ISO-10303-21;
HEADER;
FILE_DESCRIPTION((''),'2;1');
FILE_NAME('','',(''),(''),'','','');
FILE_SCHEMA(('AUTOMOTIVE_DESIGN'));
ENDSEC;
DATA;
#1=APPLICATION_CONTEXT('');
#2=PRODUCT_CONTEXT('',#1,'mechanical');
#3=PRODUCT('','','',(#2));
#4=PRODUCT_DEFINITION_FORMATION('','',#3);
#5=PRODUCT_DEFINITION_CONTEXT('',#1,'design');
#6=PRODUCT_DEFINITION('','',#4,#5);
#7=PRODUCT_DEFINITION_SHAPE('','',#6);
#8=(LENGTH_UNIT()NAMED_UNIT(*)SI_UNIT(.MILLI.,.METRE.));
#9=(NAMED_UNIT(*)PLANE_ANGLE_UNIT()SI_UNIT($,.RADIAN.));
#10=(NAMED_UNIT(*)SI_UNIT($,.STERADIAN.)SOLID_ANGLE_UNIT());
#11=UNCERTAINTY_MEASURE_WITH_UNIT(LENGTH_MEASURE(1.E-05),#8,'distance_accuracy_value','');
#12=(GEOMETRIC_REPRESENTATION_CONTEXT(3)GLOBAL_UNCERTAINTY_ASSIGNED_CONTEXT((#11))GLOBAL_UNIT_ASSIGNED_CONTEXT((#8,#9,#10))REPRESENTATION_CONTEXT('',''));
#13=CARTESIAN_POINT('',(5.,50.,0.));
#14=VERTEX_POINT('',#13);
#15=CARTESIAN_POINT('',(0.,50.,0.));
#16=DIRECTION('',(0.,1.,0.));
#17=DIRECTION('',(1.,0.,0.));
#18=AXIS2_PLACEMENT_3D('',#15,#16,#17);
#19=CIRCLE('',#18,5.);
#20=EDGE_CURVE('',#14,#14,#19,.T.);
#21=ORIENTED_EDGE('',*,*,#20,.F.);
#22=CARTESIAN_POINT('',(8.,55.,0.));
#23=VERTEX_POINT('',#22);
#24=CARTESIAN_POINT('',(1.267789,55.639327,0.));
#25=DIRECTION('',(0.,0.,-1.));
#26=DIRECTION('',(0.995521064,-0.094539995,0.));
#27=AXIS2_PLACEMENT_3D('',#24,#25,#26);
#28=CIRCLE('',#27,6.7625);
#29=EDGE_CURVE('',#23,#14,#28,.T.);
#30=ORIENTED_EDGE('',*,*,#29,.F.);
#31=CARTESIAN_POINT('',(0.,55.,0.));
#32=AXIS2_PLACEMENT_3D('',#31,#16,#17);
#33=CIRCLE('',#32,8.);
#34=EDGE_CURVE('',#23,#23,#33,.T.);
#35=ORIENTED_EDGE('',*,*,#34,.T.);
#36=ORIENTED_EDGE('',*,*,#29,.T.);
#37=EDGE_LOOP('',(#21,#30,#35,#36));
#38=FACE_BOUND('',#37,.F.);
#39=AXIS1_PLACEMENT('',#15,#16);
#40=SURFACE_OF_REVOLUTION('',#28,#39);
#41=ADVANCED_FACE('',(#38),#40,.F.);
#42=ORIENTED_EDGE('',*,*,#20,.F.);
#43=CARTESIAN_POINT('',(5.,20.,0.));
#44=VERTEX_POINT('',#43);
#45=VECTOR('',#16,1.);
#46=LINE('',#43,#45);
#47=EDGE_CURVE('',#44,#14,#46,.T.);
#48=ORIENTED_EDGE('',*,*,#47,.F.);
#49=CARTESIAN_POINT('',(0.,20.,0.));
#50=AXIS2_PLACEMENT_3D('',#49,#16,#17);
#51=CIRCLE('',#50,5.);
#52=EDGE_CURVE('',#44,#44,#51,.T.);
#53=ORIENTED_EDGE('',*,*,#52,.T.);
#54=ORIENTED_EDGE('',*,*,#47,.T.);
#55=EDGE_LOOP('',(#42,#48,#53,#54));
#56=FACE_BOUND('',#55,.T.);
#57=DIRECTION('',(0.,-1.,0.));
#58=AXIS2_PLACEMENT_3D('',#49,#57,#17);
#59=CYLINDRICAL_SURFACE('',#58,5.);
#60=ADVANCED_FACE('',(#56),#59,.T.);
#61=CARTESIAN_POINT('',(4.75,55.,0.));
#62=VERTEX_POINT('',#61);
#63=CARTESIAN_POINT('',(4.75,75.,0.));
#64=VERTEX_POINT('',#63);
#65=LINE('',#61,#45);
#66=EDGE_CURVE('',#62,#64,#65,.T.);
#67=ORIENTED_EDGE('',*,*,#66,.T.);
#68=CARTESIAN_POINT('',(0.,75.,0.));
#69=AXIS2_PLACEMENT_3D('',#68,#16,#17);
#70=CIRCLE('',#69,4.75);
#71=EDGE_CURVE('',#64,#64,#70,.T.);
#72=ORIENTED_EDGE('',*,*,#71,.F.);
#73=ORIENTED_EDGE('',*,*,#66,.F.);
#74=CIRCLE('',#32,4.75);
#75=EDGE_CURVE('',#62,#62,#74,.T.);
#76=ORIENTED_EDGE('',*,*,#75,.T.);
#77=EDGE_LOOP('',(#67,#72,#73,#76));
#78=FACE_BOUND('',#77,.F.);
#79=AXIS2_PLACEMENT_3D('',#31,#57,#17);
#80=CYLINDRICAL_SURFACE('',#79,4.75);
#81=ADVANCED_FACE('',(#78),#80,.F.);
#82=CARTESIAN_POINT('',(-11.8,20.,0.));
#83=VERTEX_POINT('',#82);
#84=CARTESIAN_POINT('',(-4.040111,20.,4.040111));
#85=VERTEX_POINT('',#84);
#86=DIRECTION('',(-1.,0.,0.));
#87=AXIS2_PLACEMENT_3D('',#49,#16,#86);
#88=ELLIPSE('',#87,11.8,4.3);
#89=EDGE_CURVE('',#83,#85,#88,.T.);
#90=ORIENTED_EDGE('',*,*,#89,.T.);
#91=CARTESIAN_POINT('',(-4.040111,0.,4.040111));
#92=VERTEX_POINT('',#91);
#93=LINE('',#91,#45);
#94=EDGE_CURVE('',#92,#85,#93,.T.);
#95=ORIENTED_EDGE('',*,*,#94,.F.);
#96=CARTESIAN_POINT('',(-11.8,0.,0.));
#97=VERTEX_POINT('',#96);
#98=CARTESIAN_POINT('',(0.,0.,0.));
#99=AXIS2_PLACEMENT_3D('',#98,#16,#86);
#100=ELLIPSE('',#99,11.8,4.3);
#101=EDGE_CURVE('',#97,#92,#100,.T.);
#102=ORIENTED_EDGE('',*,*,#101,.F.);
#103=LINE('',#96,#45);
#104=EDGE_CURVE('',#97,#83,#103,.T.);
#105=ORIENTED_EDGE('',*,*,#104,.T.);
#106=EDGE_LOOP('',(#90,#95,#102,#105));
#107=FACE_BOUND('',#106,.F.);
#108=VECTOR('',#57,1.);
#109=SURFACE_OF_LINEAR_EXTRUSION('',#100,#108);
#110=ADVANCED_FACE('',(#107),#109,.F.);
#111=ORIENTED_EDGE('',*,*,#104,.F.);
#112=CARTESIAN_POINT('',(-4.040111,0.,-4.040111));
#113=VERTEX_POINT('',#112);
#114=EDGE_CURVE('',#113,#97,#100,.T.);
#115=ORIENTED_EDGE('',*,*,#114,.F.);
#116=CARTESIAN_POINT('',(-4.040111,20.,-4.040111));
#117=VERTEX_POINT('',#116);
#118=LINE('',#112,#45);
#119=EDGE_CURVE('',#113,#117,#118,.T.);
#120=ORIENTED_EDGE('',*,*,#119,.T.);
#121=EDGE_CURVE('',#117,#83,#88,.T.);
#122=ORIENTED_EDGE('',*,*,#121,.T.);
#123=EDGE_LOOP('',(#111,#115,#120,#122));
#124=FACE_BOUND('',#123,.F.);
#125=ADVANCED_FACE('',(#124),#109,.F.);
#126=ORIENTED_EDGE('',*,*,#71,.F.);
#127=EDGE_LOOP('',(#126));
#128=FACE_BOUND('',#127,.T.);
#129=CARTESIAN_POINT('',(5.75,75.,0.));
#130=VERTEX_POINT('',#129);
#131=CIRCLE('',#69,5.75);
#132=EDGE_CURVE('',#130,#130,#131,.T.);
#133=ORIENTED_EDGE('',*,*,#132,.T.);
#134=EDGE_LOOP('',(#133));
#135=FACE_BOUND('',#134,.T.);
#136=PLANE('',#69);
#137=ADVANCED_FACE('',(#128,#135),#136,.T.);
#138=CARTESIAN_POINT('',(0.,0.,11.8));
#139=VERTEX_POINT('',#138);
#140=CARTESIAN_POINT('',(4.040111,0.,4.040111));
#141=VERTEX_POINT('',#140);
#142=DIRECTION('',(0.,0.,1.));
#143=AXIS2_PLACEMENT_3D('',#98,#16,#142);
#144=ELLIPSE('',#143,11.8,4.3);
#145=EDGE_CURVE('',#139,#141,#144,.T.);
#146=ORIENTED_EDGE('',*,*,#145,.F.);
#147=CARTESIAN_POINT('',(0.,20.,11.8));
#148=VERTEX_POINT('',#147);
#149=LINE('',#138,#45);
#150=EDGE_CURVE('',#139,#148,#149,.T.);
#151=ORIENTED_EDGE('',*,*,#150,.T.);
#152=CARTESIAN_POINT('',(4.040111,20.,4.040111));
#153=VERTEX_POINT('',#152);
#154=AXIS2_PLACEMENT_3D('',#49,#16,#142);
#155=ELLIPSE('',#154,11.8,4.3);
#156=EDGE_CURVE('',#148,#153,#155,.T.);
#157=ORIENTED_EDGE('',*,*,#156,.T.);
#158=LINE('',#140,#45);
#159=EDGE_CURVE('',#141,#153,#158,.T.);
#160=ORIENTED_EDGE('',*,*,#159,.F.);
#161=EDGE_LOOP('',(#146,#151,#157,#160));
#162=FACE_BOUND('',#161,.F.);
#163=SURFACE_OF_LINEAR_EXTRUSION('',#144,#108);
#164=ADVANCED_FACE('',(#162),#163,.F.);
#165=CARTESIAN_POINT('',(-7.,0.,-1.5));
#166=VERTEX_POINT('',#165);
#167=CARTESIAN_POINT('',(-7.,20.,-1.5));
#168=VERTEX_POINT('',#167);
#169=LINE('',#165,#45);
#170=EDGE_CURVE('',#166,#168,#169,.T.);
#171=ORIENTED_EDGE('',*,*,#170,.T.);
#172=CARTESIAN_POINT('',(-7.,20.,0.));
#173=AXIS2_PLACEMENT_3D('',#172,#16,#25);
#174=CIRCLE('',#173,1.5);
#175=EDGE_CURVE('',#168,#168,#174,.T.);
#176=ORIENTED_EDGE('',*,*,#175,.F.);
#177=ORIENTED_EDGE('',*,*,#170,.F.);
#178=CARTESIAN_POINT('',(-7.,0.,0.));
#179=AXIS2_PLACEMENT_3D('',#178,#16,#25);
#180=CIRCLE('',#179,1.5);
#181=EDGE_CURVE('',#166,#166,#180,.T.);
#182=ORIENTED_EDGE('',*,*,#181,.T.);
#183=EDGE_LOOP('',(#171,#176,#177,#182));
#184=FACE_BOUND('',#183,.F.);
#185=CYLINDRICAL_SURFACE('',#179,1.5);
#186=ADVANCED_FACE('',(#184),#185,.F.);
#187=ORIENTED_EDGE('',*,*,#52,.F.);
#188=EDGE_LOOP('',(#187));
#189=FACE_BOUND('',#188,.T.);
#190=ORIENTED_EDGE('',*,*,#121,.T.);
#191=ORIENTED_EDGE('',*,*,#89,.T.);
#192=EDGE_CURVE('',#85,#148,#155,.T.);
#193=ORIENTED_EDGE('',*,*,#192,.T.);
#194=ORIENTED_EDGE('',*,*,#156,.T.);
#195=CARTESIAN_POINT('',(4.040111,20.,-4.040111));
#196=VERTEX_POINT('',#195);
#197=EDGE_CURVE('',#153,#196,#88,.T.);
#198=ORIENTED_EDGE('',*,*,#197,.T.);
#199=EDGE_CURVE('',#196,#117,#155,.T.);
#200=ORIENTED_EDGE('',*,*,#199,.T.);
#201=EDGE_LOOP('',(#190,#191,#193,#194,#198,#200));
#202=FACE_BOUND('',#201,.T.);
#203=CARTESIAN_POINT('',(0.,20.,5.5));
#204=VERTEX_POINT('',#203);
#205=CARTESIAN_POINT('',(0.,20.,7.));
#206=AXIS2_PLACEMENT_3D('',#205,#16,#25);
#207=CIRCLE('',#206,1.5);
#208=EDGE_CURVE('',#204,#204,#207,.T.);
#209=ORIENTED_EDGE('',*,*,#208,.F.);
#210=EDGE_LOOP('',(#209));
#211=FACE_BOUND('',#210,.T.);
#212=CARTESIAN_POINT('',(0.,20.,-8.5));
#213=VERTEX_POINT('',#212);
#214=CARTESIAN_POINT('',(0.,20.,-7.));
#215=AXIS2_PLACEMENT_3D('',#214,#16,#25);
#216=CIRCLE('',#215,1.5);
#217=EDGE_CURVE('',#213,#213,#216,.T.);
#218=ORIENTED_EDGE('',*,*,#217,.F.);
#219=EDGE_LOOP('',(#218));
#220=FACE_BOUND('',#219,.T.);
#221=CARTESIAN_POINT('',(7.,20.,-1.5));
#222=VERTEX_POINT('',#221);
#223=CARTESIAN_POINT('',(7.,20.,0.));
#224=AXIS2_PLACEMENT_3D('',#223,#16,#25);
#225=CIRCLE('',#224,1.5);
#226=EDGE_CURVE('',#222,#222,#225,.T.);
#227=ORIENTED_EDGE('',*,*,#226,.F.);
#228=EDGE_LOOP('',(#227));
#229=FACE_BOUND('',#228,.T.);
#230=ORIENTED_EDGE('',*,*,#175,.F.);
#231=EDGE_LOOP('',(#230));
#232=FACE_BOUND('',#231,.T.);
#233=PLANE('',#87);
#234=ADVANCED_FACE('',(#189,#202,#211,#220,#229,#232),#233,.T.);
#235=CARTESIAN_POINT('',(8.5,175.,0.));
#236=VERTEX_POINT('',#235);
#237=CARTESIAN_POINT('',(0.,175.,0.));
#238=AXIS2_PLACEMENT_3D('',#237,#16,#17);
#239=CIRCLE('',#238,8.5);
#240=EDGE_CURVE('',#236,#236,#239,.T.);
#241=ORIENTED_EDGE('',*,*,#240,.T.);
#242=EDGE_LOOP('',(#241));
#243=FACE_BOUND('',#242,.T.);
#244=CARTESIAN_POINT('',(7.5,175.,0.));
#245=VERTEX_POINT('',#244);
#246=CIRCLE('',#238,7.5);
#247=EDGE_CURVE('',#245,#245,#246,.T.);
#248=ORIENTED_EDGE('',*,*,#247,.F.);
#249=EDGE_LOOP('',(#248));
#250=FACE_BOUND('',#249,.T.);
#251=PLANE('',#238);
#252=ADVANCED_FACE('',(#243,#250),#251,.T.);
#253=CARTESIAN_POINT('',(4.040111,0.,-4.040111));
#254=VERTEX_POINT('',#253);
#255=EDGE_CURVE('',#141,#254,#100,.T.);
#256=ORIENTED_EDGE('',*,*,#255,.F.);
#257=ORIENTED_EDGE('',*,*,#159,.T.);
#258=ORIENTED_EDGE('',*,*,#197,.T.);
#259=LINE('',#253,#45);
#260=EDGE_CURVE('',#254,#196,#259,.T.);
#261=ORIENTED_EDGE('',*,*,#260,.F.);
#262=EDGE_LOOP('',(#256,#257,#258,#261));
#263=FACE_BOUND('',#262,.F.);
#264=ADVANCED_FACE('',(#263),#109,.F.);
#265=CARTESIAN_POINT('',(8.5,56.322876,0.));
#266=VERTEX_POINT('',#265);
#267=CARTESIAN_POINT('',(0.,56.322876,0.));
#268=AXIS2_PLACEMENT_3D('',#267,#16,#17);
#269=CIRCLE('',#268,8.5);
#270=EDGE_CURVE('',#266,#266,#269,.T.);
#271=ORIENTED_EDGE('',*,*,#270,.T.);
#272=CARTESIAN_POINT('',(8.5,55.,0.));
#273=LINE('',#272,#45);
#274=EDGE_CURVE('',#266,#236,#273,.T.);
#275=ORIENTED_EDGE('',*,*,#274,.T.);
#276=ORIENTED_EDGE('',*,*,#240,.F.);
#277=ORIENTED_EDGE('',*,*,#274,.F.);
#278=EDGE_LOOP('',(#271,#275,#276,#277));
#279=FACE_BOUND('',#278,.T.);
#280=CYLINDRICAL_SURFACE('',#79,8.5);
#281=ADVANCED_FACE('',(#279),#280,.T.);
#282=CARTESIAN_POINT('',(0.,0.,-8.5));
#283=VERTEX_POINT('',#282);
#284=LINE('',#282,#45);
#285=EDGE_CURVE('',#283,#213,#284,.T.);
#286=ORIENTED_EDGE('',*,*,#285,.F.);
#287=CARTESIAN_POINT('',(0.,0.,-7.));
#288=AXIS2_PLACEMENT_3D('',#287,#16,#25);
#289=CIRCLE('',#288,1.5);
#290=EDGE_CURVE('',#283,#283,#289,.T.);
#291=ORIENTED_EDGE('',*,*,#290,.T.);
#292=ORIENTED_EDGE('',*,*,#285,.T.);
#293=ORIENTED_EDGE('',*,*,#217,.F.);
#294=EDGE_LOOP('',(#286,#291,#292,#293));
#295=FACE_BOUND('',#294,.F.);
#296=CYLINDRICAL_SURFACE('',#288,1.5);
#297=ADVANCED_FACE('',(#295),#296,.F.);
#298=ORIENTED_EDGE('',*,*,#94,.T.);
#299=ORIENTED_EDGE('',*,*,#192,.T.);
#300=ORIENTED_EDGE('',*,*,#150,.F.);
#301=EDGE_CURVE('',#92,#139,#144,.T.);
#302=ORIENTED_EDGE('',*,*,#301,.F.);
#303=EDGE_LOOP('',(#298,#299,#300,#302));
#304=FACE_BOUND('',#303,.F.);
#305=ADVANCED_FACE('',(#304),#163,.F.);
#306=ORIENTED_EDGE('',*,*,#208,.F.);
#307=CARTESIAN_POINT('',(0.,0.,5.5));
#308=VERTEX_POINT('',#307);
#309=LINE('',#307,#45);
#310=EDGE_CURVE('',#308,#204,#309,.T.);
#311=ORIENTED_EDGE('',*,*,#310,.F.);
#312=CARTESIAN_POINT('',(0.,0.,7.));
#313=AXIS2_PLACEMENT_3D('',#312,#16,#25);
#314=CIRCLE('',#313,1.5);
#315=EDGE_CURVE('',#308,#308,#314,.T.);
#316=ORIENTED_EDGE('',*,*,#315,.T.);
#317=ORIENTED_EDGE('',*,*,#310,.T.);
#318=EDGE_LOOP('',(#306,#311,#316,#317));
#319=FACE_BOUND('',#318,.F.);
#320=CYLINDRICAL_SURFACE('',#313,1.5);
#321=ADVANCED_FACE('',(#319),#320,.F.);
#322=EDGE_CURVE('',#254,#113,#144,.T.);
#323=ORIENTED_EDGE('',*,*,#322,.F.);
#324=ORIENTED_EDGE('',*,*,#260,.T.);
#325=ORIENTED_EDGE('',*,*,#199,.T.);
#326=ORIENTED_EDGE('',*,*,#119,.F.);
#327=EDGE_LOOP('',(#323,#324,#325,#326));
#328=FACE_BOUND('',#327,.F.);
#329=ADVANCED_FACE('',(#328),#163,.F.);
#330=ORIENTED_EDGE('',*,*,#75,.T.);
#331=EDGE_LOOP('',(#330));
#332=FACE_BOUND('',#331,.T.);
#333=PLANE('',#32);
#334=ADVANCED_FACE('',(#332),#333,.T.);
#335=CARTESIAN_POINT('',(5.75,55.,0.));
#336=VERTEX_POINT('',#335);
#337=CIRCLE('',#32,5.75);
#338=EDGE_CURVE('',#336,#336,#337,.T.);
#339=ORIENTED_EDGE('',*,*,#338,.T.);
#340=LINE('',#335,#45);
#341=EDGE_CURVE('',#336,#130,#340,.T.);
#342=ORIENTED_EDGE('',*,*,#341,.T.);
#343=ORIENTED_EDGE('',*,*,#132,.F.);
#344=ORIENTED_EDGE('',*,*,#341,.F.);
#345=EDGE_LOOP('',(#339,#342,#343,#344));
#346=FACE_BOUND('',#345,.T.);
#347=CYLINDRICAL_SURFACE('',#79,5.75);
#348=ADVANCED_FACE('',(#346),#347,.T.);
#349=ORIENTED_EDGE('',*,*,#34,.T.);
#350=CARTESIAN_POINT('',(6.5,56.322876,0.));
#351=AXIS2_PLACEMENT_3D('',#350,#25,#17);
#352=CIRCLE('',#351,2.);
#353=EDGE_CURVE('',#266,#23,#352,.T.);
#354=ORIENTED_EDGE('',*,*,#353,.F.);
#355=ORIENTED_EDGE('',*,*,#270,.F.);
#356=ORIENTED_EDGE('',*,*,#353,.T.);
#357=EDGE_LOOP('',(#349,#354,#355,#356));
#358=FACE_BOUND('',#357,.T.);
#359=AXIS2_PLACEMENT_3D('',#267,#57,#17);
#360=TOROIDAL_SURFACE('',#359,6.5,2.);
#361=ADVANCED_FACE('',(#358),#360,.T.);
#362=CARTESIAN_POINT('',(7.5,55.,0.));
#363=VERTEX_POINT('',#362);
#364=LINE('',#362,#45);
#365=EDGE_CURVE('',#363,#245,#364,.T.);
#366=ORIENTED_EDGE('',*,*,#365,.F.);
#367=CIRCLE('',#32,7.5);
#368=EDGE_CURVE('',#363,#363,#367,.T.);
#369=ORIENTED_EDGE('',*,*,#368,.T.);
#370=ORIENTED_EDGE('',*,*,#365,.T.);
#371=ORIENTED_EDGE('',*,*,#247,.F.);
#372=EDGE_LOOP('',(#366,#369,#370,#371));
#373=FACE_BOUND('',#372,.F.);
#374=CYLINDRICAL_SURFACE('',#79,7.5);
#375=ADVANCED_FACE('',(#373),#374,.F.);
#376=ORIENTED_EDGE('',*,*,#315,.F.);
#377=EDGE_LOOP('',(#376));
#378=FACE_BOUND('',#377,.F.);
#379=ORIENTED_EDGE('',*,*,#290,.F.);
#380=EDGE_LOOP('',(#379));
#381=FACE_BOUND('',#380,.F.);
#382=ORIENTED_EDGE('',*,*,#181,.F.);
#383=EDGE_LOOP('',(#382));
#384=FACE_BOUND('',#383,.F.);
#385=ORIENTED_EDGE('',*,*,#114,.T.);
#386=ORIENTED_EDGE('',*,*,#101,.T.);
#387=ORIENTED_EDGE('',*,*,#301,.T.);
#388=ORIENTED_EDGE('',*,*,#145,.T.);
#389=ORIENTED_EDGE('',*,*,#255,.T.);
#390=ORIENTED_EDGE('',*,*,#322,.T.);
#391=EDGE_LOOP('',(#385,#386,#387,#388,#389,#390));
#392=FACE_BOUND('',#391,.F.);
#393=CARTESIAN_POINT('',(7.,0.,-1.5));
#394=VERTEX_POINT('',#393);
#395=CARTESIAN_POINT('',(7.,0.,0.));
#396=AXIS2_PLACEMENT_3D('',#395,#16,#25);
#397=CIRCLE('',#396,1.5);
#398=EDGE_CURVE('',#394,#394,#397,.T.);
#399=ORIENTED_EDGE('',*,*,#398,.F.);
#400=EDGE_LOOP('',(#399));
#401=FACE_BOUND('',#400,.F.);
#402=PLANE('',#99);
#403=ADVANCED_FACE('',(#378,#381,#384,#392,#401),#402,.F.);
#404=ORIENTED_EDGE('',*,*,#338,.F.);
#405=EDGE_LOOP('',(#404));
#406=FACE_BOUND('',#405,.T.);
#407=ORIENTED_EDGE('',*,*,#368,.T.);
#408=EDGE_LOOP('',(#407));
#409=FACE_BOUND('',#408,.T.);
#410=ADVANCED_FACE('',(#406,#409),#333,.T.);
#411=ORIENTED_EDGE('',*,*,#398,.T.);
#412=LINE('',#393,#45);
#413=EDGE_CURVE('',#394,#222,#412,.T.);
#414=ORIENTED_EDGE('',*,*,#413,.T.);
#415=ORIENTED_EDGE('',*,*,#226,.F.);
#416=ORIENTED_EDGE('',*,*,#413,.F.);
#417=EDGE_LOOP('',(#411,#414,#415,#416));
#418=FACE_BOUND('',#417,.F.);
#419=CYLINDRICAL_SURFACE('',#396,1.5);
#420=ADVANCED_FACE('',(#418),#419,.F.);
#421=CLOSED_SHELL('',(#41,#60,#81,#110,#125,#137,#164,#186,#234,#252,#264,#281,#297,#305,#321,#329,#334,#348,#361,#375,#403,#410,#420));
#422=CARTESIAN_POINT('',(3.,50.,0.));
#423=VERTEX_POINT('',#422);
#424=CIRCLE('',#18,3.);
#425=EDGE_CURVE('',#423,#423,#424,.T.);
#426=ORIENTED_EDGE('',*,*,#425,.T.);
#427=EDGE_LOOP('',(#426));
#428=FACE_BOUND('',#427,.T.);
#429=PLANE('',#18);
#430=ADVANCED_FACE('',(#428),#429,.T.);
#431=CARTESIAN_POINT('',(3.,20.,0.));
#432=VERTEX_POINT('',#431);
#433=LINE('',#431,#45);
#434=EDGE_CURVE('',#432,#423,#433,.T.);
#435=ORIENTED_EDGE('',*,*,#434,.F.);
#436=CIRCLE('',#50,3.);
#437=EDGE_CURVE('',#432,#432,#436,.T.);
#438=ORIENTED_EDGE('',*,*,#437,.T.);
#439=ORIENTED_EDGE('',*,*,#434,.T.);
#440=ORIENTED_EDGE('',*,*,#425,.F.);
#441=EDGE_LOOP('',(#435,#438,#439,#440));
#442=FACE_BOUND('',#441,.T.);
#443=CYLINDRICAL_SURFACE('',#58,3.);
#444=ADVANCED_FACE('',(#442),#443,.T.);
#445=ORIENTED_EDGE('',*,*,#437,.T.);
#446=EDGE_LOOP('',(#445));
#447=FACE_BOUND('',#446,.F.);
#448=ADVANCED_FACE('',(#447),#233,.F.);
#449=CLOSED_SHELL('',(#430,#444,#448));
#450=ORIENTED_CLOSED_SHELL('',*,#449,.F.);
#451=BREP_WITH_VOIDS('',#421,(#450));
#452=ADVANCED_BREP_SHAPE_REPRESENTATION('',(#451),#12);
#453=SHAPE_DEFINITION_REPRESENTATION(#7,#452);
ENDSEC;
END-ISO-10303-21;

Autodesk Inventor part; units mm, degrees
ref_plane "YZ Plane" through (0, 0, 0) normal (1, 0, 0) x (0, 1, 0)
ref_plane "XZ Plane" through (0, 0, 0) normal (0, 1, 0) x (-1, 0, 0)
ref_plane "XY Plane" through (0, 0, 0) normal (0, 0, 1) x (1, 0, 0)
sketch "Sketch1" plane through (0, 0, 0) normal (0, 1, 0) x (-1, 0, 0)
  ellipse E0 centre (0, 0) end of major axis (0, 11.8) minor radius 4.3
  ellipse E1 centre (0, 0) end of major axis (11.8, 0) minor radius 4.3
  dimension "d0" = 11.8
  dimension "d1" = 4.3
  dimension "d2" = 11.8
  dimension "d3" = 4.3
sketch "Sketch2" plane through (0, 0, 0) normal (0, 1, 0) x (-1, 0, 0)
  circle A0 centre (7, 0) radius 1.5
  circle A1 centre (0, -7) radius 1.5
  circle A2 centre (-7, 0) radius 1.5
  circle A3 centre (0, 7) radius 1.5
  point P0 (0, 0)
  dimension "d4" = 3
  dimension "d5" = 3
  dimension "d6" = 3
  dimension "d7" = 3
  dimension "d8" = 7
  dimension "d9" = 7
  dimension "d10" = 7
  dimension "d11" = 7
extrude "Extrusion1" add sketch "Sketch1" along normal blind 20
hole "Hole1" at (7, 0, 0) at (0, 0, 7) at (0, 0, -7) at (-7, 0, 0) direction (0, 1, 0) diameter 3 depth 20 tip angle 118
sketch "Sketch5" plane through (0, 20, 0) normal (0, 1, 0) x (1, 0, 0)
  circle A0 centre (0, 0) radius 5
  circle A1 centre (0, 0) radius 3
  dimension "d25" = 10
  dimension "d26" = 6
extrude "Extrusion3" add sketch "Sketch5" along normal blind 30
sketch "Sketch6" plane through (0, 50, 0) normal (0, 1, 0) x (1, 0, 0)
  point P0 (0, 0)
sketch "Sketch7" plane through (0, 50, 0) normal (0, 1, 0) x (1, 0, 0)
  circle A0 centre (0, 0) radius 8
  dimension "d29" = 16
extrude "Extrusion4" add sketch "Sketch7" along normal blind 5
fillet "Fillet1" radius 6.7625 1 edges at (-8, 50, 0)
sketch "Sketch8" plane through (0, 55, 0) normal (0, 1, 0) x (1, 0, 0)
  circle A0 centre (0, 0) radius 8.5
  circle A1 centre (0, 0) radius 7.5
  dimension "d33" = 17
  dimension "d34" = 15
sketch "Sketch9" plane through (0, 55, 0) normal (0, 1, 0) x (1, 0, 0)
  circle A0 centre (0, 0) radius 5.75
  circle A1 centre (0, 0) radius 4.75
  dimension "d35" = 11.5
  dimension "d36" = 9.5
extrude "Extrusion5" add sketch "Sketch8" along normal blind 120
extrude "Extrusion6" add sketch "Sketch9" along normal blind 20
sketch "Sketch10" plane through (0, 75, 0) normal (0, 1, 0) x (1, 0, 0)
  point P0 (0, 0)
sketch "Sketch11" plane through (0, 75, 0) normal (0, 1, 0) x (1, 0, 0)
  point P0 (0, 0)
fillet "Fillet4" radius 2 1 edges at (-8.5, 55, 0)
properties part number "BB-8_headslider_stilt"
